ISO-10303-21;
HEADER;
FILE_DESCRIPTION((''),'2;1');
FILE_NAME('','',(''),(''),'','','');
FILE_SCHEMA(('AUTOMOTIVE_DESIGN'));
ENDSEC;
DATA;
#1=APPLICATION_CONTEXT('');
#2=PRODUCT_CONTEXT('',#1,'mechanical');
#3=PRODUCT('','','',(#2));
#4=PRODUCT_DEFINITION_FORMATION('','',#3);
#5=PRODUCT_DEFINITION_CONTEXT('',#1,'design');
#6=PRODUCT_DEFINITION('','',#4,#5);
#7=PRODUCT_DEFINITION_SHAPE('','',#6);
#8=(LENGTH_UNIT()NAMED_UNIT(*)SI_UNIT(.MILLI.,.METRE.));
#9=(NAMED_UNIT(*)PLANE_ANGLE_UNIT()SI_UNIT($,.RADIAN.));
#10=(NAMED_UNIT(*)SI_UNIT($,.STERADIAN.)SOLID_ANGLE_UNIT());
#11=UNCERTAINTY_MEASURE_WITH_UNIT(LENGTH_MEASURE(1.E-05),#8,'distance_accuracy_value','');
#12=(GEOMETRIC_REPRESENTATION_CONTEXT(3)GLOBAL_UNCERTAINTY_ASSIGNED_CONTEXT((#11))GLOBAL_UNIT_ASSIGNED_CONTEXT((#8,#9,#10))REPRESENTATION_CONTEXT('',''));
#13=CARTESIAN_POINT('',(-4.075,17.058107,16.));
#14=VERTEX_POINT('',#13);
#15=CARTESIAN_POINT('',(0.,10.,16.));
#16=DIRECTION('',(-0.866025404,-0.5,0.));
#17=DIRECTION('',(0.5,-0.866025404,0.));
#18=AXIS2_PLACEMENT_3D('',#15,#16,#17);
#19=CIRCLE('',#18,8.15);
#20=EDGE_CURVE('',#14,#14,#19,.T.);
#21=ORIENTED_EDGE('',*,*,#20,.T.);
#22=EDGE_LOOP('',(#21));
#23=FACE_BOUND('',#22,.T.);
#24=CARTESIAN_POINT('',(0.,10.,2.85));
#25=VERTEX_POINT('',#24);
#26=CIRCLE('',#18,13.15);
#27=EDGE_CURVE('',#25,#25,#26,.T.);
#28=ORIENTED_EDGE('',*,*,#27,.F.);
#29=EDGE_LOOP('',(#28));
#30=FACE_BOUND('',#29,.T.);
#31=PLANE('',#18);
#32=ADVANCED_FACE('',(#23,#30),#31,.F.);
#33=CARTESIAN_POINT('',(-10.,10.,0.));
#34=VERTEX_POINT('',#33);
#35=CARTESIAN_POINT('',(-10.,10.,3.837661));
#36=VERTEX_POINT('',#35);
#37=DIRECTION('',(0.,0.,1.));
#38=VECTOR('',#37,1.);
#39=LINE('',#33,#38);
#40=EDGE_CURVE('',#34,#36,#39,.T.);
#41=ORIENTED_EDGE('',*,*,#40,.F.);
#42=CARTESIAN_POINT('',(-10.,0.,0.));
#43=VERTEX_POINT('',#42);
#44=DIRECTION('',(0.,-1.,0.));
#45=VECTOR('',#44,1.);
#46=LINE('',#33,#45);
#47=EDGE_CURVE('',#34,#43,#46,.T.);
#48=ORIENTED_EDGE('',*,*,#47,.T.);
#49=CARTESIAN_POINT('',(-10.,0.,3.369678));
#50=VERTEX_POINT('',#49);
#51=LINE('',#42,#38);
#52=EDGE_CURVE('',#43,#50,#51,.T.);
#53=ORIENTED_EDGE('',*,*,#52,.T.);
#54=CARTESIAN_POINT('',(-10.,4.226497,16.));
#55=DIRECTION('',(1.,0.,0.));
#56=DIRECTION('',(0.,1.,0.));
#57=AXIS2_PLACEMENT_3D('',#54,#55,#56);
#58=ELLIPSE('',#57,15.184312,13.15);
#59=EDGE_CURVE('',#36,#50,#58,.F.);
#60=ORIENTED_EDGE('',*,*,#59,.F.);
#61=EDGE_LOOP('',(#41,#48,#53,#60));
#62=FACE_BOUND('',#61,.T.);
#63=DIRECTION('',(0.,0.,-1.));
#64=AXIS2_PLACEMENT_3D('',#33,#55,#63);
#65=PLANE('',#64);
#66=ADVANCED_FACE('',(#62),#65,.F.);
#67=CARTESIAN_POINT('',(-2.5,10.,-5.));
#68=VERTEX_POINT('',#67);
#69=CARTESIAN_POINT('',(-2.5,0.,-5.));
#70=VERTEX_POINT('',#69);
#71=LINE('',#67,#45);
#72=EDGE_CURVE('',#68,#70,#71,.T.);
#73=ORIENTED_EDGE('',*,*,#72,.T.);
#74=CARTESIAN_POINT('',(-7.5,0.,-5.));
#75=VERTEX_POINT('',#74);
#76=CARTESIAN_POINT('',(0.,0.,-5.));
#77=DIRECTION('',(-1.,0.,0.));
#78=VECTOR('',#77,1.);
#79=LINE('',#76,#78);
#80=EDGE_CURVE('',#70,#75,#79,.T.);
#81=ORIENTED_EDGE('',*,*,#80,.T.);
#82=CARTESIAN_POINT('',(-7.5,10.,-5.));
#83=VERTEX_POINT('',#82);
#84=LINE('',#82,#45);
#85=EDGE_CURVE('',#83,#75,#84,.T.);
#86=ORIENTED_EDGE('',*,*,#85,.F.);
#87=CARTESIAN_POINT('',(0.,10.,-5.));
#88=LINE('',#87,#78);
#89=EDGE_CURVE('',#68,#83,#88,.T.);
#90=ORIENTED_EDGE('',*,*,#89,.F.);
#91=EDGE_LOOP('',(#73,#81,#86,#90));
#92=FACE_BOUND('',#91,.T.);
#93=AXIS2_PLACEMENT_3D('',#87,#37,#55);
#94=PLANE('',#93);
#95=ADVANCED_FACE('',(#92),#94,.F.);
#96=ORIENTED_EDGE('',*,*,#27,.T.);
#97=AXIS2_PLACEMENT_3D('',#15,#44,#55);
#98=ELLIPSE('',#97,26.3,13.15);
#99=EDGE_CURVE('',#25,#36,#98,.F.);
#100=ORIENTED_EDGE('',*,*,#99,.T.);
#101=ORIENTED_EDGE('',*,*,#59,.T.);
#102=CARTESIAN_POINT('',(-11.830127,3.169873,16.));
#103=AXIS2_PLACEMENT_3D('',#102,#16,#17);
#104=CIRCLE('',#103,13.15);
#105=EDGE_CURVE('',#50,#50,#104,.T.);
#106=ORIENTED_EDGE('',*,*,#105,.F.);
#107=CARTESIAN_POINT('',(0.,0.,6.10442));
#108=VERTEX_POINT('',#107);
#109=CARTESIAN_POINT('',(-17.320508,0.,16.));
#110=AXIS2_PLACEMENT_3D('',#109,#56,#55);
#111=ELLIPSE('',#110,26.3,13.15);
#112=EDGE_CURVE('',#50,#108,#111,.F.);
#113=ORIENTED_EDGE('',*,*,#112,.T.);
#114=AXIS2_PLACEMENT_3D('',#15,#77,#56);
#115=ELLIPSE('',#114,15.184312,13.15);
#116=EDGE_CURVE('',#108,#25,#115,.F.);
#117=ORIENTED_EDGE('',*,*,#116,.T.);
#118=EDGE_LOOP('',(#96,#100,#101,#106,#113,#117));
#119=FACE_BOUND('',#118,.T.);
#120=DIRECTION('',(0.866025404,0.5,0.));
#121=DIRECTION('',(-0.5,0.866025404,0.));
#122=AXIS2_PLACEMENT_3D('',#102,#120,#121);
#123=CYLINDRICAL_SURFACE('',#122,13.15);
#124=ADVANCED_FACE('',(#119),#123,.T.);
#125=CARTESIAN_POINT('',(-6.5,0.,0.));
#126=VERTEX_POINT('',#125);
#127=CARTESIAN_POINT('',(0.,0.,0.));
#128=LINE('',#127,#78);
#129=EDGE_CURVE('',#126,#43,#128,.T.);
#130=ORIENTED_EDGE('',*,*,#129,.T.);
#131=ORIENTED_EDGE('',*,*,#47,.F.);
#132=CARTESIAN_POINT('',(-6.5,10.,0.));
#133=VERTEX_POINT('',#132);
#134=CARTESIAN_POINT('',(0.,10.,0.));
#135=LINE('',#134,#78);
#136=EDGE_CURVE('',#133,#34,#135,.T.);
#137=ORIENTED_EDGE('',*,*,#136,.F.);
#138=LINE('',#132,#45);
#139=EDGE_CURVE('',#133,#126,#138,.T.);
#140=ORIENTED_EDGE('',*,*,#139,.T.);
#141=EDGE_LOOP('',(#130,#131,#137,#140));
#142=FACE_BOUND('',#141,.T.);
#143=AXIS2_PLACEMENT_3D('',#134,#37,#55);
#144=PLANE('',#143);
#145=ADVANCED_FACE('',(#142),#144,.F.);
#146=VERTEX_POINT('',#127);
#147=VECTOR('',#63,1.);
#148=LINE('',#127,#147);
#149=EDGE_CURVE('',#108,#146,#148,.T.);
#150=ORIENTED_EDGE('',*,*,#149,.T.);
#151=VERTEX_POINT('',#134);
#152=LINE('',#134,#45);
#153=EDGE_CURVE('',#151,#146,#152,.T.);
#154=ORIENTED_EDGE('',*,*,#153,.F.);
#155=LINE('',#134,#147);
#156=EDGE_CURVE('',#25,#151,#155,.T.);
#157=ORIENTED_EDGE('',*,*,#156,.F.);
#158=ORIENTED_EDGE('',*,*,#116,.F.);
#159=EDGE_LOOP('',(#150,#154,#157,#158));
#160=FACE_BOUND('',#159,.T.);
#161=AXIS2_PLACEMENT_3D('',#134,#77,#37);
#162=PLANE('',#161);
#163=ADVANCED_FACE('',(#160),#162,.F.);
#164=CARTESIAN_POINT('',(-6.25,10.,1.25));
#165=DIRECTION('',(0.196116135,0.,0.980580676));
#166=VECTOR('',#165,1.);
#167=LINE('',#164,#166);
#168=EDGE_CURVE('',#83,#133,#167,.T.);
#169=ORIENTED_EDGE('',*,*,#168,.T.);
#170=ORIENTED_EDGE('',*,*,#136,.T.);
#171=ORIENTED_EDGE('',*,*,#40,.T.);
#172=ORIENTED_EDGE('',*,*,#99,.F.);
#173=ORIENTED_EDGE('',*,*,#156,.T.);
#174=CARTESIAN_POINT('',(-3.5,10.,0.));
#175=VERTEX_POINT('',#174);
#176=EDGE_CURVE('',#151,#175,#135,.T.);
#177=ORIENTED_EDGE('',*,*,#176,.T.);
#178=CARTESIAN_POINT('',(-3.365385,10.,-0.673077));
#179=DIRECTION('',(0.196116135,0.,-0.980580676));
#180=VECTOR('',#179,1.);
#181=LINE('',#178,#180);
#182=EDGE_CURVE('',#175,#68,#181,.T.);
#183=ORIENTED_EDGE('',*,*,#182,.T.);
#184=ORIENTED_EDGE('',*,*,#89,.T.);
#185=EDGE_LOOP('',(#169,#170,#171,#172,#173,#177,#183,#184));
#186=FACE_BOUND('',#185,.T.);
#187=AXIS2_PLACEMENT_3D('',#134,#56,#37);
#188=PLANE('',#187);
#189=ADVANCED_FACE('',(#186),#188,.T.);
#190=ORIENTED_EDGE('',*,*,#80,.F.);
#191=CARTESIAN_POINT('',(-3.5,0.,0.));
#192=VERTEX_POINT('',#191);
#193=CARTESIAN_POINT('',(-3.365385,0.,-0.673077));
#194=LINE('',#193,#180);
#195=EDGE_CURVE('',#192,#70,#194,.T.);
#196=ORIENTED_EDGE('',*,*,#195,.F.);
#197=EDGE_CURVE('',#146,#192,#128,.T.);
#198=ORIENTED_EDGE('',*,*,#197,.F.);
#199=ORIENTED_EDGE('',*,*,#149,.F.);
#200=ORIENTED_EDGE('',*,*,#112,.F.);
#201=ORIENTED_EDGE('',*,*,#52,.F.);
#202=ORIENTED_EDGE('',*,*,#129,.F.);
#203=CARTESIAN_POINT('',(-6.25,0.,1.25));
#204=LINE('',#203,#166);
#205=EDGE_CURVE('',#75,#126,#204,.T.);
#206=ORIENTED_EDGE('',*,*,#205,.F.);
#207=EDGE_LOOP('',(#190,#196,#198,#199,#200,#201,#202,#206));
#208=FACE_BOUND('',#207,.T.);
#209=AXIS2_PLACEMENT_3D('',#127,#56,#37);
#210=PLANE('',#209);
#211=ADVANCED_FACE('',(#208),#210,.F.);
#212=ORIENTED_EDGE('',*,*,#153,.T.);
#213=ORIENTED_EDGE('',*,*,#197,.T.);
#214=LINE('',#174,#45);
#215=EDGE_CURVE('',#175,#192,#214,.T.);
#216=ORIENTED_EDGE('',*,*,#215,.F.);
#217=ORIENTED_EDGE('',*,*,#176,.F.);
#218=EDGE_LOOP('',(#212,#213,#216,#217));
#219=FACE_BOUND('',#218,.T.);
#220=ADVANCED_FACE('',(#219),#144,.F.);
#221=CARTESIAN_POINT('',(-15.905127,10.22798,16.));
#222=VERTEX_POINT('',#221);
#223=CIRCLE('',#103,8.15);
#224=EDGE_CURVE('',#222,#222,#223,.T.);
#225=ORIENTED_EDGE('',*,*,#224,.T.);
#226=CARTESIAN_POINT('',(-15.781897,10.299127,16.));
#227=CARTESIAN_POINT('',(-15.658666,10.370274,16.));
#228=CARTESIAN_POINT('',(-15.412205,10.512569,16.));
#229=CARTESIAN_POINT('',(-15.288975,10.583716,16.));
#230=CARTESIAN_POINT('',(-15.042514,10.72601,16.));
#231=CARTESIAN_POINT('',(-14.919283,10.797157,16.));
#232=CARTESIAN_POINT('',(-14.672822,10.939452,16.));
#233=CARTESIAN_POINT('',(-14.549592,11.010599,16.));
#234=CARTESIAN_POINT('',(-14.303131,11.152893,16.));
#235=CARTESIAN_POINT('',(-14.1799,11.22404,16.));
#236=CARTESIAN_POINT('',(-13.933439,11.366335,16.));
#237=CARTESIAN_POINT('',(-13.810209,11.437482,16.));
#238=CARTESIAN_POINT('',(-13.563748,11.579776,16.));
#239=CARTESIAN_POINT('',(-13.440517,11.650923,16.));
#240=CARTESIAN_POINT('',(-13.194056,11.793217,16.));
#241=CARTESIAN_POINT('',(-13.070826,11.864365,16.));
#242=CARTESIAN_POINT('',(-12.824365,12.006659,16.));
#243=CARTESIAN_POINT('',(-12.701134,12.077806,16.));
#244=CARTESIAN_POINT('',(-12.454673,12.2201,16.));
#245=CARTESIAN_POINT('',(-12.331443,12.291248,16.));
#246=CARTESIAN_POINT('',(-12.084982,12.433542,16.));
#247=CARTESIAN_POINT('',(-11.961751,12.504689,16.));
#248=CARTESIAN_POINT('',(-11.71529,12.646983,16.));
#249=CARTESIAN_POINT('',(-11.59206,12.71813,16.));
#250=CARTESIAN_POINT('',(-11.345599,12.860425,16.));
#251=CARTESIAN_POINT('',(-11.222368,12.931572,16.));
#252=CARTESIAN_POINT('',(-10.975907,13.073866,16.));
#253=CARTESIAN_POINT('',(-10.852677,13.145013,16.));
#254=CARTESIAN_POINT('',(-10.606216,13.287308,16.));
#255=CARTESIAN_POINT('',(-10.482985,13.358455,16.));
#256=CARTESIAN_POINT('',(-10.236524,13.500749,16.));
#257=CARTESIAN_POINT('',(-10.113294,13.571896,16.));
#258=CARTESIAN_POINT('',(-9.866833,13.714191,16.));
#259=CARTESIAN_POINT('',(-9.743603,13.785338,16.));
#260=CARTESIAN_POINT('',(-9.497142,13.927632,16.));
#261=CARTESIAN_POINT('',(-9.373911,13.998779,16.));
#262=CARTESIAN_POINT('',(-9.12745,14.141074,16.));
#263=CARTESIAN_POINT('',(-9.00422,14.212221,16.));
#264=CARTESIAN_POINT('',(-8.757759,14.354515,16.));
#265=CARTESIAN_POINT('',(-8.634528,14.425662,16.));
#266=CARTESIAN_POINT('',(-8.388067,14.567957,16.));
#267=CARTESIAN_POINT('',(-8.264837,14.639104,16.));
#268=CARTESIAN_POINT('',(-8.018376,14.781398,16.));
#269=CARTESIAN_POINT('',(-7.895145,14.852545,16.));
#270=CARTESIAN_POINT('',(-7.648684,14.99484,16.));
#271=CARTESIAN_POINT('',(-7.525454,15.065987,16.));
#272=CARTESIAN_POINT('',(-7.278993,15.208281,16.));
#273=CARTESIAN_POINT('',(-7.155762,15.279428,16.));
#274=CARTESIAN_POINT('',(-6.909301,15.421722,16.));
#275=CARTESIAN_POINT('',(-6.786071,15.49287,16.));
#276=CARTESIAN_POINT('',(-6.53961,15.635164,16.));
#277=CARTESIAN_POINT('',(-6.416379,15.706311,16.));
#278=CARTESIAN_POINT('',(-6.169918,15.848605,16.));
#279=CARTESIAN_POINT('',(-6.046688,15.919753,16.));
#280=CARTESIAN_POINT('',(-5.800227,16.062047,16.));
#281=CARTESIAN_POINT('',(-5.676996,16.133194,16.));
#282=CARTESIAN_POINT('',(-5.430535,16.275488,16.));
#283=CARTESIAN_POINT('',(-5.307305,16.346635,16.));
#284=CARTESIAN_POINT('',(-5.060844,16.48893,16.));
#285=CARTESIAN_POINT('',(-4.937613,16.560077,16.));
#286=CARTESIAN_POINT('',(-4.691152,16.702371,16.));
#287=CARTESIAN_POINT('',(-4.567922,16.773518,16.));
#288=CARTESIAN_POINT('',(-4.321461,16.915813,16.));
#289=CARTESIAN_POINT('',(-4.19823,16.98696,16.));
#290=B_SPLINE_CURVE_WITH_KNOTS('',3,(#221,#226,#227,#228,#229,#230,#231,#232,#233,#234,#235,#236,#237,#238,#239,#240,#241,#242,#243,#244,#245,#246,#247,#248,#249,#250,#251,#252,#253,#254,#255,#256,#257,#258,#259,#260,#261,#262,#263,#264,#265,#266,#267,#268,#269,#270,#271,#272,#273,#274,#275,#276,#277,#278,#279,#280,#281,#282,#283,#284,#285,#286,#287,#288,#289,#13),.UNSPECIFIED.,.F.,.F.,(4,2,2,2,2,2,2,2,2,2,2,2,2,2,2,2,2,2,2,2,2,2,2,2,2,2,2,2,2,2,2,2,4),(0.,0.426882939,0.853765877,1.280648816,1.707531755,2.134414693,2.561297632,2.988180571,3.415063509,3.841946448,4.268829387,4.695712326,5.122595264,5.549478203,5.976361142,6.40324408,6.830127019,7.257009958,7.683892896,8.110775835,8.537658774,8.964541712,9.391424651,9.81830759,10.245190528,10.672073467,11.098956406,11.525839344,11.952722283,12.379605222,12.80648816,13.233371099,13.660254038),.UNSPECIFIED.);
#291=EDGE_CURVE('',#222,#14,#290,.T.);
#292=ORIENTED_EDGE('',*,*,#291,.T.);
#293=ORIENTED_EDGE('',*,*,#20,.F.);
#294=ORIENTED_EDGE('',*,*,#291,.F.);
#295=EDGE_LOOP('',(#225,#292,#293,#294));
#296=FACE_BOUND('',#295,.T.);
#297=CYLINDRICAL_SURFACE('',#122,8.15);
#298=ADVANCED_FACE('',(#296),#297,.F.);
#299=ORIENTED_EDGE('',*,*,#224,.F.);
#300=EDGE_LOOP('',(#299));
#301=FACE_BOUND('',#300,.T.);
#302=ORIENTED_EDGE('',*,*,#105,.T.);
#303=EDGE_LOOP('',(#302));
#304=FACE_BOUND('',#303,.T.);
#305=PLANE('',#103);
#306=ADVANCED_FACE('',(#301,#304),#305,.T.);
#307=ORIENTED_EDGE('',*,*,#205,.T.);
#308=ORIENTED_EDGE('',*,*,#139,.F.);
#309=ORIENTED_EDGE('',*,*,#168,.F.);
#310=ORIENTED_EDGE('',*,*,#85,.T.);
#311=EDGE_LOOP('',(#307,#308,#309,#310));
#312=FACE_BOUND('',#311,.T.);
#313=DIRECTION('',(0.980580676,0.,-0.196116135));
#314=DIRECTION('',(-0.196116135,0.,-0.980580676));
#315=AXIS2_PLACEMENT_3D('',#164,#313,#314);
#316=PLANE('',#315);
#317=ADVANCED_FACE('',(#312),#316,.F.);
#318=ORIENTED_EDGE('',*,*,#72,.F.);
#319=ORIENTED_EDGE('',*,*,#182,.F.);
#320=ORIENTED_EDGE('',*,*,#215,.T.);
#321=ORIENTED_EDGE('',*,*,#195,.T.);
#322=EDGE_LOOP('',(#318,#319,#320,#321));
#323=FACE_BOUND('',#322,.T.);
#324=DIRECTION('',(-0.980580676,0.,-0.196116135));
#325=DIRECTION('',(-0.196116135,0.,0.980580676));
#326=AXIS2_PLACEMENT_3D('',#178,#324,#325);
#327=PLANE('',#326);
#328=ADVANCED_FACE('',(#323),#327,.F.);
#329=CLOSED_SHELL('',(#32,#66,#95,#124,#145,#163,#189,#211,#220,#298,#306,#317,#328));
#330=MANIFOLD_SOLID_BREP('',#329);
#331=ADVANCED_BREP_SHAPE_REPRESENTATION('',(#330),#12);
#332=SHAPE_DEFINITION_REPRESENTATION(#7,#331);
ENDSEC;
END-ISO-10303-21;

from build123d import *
from build123d.topology import SkipClean

# Parameters (mm, degrees)
BOSS_EXTRUDE1_DEPTH     = 10
SKETCH2_R               = 13.15
SKETCH2_R_2             = 8.15
BOSS_EXTRUDE2_DEPTH     = 13.660254
BOSS_EXTRUDE4_OUTLINE_W = 10
BOSS_EXTRUDE4_OUTLINE_H = 10
BOSS_EXTRUDE4_DEPTH     = 3.254420179


# Read off the part's stored shape, not the designer's step: Boss-Extrude4
with BuildPart() as part:
    # Sketch1 → Boss-Extrude1 (new body)
    with BuildSketch(Plane(origin=(0, 0, 0), x_dir=(1, 0, 0), z_dir=(0, 1, 0))):
        Polygon((-5, -2.85), (-5, 5), (-7.5, 5), (-6.5, 0), (-10, 0), (-10, -2.85), align=None)
        Polygon((0, 0), (-3.5, 0), (-2.5, 5), (-5, 5), (-5, -2.85), (0, -2.85), align=None)
    extrude(amount=BOSS_EXTRUDE1_DEPTH)



with BuildPart() as body_2:
    # Sketch2 → Boss-Extrude2 (new body)
    with BuildSketch(Plane(origin=(4.330127019, 2.5, 0), x_dir=(0, 0, -1), z_dir=(-0.8660254037844362, -0.5000000000000041, 0))):
        with Locations(Location((-16, -8.660254038, 0), (0, 0, 270))):
            Circle(SKETCH2_R)
        with Locations(Location((-16, -8.660254038, 0), (0, 0, 270))):
            Circle(SKETCH2_R_2, mode=Mode.SUBTRACT)
    extrude(amount=BOSS_EXTRUDE2_DEPTH)


with BuildPart() as part_1:
    with SkipClean():  # the faces are left unmerged after this step: merging them gives an invalid solid
        add(part.part)

        add(body_2.part)  # Boss-Extrude4 merges body 2
        # Boss-Extrude4 outline → Boss-Extrude4 (add)
        with BuildSketch(Plane.XY.offset(2.85)):
            with Locations((-5, 5)):
                Rectangle(BOSS_EXTRUDE4_OUTLINE_W, BOSS_EXTRUDE4_OUTLINE_H)
        extrude(amount=BOSS_EXTRUDE4_DEPTH)


solid = part_1.part
